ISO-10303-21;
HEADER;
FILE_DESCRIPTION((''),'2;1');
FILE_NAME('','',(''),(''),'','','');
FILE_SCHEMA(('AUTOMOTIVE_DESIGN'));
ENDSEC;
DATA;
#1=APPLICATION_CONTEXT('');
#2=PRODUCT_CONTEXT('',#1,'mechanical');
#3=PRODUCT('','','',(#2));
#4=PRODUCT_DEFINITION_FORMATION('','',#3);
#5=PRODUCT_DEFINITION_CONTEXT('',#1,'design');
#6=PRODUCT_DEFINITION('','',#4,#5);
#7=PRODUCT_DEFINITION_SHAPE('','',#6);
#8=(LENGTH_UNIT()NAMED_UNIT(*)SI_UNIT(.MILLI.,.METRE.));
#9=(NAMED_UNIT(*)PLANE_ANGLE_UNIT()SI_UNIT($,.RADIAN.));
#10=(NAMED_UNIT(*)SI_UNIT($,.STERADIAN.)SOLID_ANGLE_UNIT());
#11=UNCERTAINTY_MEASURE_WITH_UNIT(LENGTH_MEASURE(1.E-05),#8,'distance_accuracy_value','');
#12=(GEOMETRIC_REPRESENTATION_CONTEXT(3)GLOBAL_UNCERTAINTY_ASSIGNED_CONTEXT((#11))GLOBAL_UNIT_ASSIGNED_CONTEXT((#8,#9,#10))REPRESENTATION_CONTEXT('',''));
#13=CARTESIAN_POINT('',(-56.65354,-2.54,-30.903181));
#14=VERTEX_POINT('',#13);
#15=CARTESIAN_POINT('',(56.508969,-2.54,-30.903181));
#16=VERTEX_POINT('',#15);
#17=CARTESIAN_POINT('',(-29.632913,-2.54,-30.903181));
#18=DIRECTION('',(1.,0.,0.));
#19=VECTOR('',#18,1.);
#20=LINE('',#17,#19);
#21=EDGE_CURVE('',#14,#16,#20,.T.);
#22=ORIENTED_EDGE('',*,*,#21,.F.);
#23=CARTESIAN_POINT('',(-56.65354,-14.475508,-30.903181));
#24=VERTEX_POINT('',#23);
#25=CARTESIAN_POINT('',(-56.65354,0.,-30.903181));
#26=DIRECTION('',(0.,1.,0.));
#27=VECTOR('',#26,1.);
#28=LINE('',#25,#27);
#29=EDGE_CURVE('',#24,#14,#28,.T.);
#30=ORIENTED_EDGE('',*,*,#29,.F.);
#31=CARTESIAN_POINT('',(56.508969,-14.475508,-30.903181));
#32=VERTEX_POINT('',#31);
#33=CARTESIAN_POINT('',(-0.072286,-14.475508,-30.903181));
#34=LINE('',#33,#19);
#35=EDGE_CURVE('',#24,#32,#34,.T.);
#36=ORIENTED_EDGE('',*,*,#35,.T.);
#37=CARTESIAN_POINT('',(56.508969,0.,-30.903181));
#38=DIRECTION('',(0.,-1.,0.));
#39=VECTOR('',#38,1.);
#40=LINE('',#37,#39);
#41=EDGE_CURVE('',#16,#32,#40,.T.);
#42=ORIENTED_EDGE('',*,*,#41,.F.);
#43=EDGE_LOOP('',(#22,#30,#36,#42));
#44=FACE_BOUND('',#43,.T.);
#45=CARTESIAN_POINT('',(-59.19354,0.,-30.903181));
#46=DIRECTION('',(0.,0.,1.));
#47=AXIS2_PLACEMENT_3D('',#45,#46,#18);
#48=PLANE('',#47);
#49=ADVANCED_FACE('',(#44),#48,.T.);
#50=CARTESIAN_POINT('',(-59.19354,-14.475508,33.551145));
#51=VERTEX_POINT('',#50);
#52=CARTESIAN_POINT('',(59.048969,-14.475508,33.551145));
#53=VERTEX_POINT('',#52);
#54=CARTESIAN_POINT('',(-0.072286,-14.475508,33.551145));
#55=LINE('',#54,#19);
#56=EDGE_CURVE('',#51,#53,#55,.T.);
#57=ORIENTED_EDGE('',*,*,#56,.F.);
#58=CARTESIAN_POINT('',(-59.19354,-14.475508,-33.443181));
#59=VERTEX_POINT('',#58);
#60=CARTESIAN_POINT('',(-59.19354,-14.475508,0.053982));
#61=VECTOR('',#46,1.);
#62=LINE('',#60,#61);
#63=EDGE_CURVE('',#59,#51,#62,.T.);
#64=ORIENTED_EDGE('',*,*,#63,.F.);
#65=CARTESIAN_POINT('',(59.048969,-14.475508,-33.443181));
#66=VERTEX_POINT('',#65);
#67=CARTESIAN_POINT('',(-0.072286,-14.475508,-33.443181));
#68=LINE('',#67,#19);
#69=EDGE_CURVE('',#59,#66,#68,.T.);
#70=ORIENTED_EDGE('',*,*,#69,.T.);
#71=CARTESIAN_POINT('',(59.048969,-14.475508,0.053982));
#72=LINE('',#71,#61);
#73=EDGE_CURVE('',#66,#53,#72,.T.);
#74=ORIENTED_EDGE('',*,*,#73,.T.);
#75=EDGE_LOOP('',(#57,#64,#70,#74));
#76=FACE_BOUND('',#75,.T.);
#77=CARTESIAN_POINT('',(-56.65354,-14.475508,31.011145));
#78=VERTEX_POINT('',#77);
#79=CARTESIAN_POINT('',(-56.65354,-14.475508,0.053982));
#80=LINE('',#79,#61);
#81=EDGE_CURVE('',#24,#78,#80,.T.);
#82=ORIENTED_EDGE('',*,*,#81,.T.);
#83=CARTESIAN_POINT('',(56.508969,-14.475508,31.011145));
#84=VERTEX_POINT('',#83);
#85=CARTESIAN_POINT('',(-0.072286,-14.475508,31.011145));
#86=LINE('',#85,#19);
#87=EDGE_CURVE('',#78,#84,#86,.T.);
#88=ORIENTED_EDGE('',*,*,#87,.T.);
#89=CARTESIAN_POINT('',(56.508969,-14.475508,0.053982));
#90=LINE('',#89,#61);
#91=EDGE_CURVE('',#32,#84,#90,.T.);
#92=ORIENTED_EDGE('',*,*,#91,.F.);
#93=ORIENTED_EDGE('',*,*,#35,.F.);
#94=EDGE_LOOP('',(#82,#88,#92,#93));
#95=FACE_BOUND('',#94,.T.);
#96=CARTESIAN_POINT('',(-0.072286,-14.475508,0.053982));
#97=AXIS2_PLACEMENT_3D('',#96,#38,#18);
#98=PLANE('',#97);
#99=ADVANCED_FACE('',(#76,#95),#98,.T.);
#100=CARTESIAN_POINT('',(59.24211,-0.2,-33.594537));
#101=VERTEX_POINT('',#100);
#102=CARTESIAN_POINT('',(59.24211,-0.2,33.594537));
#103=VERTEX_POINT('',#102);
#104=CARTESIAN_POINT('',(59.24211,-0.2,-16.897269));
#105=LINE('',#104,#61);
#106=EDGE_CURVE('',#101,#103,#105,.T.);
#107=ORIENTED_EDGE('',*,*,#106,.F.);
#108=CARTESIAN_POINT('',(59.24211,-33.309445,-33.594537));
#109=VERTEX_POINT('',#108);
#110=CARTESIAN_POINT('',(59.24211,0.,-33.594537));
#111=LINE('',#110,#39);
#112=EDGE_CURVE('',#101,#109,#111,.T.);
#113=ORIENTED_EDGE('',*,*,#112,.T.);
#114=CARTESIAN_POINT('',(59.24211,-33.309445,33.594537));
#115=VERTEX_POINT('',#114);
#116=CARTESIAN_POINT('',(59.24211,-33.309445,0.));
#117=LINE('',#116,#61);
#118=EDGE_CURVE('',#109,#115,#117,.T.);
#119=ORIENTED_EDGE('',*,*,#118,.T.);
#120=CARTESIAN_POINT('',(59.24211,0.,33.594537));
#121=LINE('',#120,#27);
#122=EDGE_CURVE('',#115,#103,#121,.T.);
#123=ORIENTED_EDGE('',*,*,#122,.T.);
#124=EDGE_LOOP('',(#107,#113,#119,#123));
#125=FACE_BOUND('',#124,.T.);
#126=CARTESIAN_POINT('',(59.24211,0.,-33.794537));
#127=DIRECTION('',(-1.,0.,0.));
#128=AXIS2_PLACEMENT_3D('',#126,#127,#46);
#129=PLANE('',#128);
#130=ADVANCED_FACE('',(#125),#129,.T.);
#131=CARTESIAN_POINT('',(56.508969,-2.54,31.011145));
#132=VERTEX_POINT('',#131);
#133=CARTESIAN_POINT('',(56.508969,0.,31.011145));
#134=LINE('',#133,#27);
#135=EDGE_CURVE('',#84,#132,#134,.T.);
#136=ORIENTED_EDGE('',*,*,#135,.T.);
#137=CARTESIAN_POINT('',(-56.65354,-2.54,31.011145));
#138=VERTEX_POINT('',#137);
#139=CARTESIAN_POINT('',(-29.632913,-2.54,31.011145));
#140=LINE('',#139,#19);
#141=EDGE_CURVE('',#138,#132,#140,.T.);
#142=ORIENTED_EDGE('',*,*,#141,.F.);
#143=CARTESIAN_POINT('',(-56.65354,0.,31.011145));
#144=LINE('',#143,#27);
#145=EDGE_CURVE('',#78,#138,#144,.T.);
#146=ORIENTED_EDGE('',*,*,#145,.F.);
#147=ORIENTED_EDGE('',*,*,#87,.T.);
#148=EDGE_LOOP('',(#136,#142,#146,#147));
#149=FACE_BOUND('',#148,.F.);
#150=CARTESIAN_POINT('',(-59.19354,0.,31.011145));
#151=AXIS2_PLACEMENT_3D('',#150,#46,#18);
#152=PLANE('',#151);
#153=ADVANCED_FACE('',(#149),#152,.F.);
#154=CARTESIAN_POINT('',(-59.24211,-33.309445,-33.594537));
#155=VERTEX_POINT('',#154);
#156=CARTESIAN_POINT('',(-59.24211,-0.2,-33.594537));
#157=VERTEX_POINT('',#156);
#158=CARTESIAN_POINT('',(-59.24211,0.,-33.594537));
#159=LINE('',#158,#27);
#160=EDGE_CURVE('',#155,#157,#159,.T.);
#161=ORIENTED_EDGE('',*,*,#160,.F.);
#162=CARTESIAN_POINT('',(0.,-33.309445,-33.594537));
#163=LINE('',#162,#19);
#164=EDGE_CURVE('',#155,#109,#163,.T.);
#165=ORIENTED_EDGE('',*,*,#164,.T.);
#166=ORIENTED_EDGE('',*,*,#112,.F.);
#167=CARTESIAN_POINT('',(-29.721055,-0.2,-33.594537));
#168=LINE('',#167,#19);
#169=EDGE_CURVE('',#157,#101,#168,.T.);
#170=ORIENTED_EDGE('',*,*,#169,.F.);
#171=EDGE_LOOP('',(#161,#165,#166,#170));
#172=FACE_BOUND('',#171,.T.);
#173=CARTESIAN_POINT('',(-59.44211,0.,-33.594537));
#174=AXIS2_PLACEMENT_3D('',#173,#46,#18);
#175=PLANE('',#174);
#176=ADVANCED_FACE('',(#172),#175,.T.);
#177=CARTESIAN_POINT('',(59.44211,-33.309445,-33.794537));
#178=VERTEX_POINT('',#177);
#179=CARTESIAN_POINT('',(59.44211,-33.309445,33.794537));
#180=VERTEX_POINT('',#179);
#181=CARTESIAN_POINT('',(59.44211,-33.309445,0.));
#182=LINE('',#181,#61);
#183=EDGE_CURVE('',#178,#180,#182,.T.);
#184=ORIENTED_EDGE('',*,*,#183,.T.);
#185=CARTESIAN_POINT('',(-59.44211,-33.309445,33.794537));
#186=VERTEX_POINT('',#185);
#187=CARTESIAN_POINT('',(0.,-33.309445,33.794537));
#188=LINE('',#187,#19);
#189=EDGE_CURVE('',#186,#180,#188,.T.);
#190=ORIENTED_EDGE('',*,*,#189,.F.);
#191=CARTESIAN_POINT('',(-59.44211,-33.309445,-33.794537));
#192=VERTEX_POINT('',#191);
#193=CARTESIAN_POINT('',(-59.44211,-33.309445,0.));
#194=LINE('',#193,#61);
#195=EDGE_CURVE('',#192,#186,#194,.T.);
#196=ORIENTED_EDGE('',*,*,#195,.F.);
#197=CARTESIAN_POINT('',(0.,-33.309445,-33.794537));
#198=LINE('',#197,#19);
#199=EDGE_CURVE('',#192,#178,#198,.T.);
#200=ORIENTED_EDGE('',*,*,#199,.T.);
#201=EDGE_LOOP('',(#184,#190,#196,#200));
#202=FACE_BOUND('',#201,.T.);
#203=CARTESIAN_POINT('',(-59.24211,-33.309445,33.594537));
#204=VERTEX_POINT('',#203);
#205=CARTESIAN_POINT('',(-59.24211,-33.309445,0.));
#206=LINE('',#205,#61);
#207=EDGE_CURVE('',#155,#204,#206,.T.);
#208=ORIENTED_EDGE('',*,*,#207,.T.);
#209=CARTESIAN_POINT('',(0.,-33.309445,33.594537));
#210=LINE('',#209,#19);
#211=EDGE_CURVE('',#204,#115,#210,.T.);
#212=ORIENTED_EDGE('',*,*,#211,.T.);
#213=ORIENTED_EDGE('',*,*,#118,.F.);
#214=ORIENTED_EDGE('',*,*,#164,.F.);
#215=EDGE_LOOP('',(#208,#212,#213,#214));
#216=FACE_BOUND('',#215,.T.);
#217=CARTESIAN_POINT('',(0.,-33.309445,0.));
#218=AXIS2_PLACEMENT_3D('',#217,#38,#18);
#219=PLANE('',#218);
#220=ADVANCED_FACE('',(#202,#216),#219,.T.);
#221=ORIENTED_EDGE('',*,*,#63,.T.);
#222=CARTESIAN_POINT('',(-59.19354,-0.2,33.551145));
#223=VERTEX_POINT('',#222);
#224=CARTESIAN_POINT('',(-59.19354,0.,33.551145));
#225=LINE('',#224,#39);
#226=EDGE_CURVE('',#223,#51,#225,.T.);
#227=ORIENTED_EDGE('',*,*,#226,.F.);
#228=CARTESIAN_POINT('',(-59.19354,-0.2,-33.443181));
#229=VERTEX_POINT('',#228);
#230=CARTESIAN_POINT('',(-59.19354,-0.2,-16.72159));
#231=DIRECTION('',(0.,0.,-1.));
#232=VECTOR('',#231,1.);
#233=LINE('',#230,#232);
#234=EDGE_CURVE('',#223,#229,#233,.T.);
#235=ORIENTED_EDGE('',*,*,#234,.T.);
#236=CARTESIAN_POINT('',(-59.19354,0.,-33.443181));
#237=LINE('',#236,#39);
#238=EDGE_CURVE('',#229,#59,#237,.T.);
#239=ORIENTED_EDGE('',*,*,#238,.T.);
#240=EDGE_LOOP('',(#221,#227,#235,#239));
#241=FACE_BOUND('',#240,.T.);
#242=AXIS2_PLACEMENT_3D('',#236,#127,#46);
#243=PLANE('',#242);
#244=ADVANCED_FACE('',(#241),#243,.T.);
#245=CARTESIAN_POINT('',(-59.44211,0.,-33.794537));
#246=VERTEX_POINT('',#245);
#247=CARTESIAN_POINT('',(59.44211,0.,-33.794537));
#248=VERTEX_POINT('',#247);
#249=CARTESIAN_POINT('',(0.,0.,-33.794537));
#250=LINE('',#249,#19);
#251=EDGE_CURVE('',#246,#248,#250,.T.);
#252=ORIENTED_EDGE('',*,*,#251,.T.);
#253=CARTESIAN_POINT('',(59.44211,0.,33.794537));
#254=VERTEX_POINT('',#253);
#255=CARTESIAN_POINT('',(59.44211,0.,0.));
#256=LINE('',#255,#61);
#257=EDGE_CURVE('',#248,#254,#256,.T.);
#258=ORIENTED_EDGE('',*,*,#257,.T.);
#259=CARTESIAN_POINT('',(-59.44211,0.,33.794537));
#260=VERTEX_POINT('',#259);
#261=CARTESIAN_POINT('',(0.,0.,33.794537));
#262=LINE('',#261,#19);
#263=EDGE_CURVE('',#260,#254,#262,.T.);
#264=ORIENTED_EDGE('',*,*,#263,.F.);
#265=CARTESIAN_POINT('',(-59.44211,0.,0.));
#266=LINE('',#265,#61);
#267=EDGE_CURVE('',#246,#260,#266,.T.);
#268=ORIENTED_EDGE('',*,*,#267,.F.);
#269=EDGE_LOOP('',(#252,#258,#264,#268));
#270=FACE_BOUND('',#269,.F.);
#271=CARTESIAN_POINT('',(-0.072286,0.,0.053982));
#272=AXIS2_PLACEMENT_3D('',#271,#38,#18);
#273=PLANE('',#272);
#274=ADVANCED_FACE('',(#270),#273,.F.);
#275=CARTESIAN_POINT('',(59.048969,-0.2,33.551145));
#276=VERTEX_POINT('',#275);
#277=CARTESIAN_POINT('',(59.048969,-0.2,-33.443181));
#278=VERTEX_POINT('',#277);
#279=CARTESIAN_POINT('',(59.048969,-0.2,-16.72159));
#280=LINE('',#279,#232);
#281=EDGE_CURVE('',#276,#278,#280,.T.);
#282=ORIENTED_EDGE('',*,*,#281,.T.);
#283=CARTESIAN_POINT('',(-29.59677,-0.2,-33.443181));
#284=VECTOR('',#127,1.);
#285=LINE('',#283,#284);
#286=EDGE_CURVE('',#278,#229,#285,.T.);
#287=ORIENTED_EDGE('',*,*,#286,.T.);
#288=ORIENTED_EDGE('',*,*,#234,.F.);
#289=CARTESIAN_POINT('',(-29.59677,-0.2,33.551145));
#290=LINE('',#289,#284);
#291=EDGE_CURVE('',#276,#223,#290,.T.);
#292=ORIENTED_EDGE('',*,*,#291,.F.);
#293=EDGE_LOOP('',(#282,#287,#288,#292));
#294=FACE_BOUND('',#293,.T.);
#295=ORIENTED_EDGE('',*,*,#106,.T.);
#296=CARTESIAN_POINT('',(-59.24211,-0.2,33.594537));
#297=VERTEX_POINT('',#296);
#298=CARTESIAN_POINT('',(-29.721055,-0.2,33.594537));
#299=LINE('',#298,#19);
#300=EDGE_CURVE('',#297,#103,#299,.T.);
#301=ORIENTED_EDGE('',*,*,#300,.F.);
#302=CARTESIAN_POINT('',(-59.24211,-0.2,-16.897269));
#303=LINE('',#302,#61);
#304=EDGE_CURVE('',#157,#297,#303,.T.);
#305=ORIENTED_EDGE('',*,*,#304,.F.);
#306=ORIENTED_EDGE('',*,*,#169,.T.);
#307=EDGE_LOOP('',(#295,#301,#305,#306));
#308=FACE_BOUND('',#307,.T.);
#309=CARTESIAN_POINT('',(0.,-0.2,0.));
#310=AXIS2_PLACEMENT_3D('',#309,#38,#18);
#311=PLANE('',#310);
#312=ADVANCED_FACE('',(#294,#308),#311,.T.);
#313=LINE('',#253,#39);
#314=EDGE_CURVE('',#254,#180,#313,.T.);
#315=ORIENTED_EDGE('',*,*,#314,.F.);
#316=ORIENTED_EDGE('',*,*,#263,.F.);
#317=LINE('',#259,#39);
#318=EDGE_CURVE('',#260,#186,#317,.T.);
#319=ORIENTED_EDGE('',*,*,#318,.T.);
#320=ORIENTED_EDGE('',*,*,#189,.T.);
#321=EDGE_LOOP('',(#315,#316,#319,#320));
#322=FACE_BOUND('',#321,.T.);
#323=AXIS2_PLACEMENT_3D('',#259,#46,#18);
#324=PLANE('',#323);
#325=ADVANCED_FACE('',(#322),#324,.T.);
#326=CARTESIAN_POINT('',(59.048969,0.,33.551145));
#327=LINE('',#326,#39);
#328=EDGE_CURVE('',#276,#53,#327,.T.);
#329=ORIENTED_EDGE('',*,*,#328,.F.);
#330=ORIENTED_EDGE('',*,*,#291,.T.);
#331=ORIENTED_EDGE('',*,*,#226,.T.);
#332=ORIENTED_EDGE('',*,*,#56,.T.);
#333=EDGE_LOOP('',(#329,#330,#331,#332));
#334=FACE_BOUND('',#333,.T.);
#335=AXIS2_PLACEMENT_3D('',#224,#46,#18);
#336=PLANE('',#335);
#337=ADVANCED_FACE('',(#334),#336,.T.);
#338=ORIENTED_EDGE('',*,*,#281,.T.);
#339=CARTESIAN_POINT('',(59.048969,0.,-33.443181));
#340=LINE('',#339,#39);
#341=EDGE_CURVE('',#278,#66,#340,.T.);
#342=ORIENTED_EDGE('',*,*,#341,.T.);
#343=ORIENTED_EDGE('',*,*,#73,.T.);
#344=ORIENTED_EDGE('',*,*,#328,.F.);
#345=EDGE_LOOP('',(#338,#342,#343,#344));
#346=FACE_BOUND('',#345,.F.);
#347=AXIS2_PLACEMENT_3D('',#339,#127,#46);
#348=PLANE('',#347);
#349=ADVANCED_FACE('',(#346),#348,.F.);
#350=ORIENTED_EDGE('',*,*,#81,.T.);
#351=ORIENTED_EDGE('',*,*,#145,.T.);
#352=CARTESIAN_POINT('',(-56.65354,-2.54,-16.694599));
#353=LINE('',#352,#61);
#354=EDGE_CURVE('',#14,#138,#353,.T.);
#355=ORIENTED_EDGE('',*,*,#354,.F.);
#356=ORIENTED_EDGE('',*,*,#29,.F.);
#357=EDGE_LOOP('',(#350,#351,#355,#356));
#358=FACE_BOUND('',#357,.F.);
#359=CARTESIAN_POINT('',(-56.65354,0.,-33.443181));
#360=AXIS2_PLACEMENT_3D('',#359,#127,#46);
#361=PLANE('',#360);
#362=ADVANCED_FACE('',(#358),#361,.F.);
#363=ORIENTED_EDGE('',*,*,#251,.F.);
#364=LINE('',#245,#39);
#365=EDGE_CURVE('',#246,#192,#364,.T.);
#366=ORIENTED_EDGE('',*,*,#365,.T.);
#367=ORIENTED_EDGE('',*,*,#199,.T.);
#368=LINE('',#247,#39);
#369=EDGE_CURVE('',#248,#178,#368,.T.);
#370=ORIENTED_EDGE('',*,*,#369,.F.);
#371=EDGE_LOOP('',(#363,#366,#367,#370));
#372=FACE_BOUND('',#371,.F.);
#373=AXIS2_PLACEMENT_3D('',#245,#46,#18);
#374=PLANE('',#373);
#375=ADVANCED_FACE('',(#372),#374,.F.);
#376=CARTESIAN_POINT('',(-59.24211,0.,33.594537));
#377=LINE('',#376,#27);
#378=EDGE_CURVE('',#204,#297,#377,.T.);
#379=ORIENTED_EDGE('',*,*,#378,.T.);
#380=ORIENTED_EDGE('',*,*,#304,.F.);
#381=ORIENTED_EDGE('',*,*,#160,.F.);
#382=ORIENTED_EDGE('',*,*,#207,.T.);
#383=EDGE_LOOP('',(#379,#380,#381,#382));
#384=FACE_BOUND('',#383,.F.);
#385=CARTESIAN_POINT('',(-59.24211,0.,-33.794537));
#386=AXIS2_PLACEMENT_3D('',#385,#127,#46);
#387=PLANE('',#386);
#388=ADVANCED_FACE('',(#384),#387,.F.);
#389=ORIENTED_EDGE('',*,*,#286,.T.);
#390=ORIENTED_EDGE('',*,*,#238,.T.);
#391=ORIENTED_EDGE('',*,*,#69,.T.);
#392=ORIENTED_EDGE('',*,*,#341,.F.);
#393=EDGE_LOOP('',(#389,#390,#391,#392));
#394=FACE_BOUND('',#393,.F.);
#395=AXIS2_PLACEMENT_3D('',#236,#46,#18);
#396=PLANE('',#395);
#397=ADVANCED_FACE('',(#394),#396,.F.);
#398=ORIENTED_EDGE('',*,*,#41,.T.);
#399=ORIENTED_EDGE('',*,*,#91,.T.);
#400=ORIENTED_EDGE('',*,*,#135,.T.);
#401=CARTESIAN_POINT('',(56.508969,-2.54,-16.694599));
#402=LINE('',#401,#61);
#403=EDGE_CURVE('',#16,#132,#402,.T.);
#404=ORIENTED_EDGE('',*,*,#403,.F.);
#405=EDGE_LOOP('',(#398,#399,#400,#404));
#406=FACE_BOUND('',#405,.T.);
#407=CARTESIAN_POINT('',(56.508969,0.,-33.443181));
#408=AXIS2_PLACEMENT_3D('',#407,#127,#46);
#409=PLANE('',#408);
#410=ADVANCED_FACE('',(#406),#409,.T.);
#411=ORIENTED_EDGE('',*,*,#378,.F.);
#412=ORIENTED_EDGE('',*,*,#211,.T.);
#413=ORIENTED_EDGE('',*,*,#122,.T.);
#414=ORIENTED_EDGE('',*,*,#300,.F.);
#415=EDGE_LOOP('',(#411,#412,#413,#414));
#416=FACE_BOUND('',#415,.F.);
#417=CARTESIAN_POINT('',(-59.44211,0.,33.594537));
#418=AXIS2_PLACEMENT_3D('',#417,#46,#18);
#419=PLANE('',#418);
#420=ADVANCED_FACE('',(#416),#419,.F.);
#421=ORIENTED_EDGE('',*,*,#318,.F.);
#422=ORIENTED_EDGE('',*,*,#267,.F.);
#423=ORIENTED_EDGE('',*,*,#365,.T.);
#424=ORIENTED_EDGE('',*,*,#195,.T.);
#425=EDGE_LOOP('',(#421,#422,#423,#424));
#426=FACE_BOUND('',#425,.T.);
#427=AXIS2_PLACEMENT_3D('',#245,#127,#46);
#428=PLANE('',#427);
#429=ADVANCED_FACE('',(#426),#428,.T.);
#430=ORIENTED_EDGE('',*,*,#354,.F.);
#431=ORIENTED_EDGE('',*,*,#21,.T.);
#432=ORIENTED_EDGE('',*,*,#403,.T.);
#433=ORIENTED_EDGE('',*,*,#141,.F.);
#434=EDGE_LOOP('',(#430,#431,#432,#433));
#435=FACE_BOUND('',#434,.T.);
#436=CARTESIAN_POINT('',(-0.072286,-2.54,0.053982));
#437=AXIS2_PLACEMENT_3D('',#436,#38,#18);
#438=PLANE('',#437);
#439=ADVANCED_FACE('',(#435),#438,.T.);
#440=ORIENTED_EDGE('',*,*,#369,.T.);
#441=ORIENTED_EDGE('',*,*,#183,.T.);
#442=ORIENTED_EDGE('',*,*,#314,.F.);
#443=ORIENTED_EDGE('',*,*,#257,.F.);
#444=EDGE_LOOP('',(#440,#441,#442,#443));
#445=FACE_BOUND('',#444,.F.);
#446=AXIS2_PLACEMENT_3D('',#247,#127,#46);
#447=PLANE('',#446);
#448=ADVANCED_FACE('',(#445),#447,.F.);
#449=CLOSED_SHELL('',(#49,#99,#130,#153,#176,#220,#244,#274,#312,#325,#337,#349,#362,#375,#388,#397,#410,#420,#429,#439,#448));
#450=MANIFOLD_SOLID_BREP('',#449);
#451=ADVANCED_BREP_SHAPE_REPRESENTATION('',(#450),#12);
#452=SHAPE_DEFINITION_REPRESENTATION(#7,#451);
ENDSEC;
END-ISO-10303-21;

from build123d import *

# Parameters (mm, degrees)
F0_W     = 118.8842207193
F0_H     = 67.5890743732
F1_DEPTH = 33.3094447851
F2_T     = -0.2
F3_W     = 118.2425096631
F3_H     = 66.9943261892
F4_DEPTH = 14.4755076617
F5_T     = -2.54


with BuildPart() as f1:
    # F0 (on Front) → F1 (new body)
    with BuildSketch(Plane.XZ):
        Rectangle(F0_W, F0_H)
    extrude(amount=F1_DEPTH)

    # F2
    f2_openings = [f1.faces().sort_by_distance(p)[0] for p in [
        (0, -33.309445, 0),
    ]]
    offset(amount=F2_T, openings=f2_openings)

    # F3 (on Front) → F4 (join)
    with BuildSketch(Plane.XZ):
        with Locations((-0.072285533, 0.0539822504)):
            Rectangle(F3_W, F3_H)
    extrude(amount=F4_DEPTH)

    # F5
    f5_openings = [f1.faces().sort_by_distance(p)[0] for p in [
        (0, -16.754722, 33.594537),
        (-0.072286, -14.475508, 0.053982),
    ]]
    offset(amount=F5_T, openings=f5_openings)


solid = f1.part
